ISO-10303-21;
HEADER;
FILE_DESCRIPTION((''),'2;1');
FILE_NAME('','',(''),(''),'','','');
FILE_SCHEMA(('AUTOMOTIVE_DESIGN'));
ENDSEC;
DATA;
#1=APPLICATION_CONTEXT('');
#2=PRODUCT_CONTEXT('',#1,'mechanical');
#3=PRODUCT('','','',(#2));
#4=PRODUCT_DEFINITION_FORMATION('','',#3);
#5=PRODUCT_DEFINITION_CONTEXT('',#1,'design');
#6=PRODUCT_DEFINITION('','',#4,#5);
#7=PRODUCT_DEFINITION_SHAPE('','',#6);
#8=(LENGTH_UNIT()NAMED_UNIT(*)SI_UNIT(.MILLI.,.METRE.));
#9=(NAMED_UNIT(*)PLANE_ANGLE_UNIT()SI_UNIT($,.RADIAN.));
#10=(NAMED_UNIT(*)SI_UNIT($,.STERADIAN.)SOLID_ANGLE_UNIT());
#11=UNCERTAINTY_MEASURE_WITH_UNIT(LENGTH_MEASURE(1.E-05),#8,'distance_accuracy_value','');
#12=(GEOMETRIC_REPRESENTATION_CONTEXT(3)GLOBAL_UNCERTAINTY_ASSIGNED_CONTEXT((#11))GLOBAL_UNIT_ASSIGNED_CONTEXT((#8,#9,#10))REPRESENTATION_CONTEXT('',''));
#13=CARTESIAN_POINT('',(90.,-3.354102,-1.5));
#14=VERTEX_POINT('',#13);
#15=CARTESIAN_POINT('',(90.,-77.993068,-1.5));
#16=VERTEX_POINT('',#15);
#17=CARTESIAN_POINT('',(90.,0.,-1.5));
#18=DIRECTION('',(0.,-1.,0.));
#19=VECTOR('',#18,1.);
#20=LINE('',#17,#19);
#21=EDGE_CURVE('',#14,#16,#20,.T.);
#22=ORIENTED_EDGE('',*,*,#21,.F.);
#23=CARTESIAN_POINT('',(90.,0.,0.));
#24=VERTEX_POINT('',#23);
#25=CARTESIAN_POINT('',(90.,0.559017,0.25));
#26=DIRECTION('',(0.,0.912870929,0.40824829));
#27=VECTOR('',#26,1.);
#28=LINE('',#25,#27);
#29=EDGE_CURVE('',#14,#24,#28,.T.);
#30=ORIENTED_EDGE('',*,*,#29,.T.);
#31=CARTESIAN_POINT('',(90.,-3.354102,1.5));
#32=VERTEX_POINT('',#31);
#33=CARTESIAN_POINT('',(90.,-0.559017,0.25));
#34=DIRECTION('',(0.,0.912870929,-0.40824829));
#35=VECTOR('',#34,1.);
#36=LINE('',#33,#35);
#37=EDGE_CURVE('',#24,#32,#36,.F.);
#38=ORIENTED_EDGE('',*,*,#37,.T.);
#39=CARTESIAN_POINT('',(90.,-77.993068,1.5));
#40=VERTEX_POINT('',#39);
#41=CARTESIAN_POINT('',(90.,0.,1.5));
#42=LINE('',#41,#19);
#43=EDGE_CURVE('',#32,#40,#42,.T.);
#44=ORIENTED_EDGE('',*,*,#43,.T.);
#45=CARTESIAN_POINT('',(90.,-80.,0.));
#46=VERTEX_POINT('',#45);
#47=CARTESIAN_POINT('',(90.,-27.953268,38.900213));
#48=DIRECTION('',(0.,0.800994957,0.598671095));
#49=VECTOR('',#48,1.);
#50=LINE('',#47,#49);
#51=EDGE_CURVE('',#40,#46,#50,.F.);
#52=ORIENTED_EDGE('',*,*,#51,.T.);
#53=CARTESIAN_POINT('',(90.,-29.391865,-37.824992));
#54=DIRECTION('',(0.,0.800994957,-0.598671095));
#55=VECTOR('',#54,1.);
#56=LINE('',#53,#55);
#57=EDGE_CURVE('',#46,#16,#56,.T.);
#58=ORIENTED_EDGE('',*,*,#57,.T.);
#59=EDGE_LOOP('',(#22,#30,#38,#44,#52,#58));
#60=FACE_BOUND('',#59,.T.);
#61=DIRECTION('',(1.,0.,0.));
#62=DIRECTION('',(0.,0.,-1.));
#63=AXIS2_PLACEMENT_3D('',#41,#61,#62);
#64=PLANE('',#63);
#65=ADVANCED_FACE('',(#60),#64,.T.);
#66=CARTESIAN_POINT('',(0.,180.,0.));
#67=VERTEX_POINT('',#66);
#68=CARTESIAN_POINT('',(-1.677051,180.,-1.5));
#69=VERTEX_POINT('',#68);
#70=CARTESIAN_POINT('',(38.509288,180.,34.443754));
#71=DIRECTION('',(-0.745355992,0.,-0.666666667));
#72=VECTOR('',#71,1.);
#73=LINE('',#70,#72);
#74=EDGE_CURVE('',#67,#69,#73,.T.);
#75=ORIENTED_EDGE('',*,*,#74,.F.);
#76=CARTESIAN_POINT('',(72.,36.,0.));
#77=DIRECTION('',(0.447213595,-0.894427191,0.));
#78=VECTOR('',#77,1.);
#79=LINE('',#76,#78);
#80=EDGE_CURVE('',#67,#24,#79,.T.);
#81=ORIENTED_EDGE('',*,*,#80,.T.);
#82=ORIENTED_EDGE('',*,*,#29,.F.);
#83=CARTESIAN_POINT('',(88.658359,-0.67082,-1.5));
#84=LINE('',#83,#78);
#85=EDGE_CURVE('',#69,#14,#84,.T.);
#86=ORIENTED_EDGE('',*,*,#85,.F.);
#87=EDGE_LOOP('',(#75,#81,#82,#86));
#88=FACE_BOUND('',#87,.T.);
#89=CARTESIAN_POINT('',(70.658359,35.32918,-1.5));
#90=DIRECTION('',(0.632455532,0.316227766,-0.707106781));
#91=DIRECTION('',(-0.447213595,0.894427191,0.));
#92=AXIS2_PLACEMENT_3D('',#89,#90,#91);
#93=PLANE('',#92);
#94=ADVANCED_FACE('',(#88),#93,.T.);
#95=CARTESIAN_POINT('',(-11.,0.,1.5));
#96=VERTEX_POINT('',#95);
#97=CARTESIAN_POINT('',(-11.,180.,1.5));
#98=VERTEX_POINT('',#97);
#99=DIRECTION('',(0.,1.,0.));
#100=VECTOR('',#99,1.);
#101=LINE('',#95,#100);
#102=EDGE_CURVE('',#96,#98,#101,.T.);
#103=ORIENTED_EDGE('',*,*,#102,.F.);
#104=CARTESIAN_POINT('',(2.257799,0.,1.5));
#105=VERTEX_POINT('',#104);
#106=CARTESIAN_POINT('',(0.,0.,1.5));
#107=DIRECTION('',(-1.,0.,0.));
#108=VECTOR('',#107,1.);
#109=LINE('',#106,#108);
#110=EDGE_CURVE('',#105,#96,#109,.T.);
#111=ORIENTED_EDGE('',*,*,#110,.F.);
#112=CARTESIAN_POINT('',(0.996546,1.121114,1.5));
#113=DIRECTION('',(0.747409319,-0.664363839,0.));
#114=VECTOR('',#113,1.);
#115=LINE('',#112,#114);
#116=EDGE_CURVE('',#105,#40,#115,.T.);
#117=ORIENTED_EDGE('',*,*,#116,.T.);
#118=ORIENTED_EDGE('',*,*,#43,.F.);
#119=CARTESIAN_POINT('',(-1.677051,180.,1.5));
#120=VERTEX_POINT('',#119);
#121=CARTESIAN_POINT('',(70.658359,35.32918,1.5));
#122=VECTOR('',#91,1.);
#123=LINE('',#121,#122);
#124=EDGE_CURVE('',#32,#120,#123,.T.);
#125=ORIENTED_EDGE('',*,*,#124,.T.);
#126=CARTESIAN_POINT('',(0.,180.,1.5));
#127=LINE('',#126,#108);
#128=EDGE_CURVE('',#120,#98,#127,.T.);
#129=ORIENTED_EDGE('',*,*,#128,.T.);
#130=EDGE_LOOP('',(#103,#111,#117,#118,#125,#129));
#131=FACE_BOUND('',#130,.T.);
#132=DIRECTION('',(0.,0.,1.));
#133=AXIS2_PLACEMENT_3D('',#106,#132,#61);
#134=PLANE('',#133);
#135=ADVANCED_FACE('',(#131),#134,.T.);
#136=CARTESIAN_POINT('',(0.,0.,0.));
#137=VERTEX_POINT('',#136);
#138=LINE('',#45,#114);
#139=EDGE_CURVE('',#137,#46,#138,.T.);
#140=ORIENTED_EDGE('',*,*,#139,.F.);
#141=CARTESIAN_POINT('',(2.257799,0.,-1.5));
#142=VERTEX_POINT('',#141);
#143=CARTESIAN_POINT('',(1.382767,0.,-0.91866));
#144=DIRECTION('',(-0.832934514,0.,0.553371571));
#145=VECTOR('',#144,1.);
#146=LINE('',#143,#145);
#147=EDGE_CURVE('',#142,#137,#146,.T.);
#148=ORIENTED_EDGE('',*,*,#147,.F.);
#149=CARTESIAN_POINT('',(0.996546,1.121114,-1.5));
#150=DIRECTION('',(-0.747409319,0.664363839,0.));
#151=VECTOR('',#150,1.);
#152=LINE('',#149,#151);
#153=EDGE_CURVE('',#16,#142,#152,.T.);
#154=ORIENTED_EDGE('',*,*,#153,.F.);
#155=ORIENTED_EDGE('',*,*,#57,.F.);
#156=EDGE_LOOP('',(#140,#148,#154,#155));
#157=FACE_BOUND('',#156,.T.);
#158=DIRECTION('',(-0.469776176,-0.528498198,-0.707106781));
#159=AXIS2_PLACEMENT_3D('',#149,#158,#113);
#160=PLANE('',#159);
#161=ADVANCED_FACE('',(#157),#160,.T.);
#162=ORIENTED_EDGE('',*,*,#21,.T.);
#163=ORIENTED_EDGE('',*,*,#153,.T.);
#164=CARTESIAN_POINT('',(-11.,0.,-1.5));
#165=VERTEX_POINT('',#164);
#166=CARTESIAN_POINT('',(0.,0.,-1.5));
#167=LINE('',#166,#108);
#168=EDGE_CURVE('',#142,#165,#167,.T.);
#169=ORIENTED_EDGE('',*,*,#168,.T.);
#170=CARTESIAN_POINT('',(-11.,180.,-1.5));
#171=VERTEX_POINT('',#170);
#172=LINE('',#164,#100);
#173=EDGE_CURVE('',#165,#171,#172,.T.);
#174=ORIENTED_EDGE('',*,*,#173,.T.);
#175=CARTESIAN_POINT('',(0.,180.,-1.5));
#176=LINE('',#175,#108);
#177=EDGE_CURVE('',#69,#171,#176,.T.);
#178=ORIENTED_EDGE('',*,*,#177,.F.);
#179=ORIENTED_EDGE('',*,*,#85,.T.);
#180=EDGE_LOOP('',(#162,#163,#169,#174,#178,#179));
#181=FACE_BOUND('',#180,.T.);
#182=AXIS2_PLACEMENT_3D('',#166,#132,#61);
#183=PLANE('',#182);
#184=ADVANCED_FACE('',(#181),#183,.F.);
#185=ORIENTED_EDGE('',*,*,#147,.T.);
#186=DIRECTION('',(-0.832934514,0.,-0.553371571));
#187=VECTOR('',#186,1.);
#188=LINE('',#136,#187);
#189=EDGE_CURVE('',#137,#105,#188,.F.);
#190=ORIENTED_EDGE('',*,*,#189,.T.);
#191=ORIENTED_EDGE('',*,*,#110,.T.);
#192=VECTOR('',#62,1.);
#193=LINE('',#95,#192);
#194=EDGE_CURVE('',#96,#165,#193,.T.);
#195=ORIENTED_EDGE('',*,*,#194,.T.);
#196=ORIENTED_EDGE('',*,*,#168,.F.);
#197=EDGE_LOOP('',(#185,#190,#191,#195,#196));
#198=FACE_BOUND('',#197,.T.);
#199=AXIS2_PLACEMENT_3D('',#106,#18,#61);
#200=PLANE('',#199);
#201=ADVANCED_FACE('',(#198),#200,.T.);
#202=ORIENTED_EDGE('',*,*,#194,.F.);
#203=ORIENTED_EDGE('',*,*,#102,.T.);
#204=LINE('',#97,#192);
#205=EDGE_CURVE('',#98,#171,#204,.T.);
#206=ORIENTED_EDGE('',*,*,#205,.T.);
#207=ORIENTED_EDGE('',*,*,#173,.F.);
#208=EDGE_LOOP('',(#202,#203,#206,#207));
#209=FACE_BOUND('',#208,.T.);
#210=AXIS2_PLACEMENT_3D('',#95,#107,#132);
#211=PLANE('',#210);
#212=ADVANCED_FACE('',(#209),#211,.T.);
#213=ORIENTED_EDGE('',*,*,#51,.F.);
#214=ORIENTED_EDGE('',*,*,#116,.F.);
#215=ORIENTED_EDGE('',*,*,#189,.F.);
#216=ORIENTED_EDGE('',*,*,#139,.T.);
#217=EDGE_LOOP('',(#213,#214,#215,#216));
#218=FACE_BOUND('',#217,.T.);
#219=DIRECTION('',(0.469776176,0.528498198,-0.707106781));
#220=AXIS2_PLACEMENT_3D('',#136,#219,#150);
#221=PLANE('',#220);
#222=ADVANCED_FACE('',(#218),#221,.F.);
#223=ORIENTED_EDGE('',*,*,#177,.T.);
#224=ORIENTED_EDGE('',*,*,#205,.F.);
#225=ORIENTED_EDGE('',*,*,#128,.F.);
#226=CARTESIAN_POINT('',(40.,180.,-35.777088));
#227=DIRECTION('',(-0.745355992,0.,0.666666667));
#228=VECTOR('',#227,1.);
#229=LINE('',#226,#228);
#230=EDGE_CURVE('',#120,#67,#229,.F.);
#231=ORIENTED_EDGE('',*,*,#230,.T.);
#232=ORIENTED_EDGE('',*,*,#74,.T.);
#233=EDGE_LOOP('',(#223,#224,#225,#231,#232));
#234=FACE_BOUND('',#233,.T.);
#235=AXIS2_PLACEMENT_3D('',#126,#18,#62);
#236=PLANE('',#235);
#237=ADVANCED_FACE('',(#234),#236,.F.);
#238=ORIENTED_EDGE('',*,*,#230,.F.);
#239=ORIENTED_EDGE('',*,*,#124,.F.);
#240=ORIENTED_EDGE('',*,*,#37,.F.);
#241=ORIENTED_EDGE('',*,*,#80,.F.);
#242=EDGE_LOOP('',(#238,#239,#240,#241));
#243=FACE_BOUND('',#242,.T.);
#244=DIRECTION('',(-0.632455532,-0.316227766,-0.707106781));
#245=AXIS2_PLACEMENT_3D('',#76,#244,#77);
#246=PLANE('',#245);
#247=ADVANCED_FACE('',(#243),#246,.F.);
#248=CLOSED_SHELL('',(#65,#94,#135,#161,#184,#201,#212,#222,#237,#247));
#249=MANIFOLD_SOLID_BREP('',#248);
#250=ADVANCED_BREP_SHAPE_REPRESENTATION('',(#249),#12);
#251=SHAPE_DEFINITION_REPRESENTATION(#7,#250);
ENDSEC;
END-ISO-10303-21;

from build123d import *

# Parameters (mm, degrees)
SKETCH1_W           = 11
SKETCH1_H           = 180
BOSS_EXTRUDE1_DEPTH = 1.5
CHAMFER1_SIZE       = 1.5
CHAMFER2_SIZE       = 1.5


with BuildPart() as part:
    # Sketch1 → Boss-Extrude1 (new, symmetric)
    with BuildSketch(Plane.XY):
        Polygon((90, -80), (0, 0), (0, 180), (90, 0), align=None)
        with Locations((-5.5, 90)):
            Rectangle(SKETCH1_W, SKETCH1_H)
    extrude(amount=BOSS_EXTRUDE1_DEPTH, both=True)

    # Chamfer1
    chamfer1_edges = [part.edges().sort_by_distance(p)[0] for p in [
        (45, 90, -1.5),
        (45, 90, 1.5),
    ]]
    chamfer(chamfer1_edges, length=CHAMFER1_SIZE - 0.0001)  # a hair under: the kernel refuses the full size

    # Chamfer2
    chamfer2_edges = [part.edges().sort_by_distance(p)[0] for p in [
        (45, -40, 1.5),
        (45, -40, -1.5),
    ]]
    chamfer(chamfer2_edges, length=CHAMFER2_SIZE - 0.0001)  # a hair under: the kernel refuses the full size


solid = part.part
